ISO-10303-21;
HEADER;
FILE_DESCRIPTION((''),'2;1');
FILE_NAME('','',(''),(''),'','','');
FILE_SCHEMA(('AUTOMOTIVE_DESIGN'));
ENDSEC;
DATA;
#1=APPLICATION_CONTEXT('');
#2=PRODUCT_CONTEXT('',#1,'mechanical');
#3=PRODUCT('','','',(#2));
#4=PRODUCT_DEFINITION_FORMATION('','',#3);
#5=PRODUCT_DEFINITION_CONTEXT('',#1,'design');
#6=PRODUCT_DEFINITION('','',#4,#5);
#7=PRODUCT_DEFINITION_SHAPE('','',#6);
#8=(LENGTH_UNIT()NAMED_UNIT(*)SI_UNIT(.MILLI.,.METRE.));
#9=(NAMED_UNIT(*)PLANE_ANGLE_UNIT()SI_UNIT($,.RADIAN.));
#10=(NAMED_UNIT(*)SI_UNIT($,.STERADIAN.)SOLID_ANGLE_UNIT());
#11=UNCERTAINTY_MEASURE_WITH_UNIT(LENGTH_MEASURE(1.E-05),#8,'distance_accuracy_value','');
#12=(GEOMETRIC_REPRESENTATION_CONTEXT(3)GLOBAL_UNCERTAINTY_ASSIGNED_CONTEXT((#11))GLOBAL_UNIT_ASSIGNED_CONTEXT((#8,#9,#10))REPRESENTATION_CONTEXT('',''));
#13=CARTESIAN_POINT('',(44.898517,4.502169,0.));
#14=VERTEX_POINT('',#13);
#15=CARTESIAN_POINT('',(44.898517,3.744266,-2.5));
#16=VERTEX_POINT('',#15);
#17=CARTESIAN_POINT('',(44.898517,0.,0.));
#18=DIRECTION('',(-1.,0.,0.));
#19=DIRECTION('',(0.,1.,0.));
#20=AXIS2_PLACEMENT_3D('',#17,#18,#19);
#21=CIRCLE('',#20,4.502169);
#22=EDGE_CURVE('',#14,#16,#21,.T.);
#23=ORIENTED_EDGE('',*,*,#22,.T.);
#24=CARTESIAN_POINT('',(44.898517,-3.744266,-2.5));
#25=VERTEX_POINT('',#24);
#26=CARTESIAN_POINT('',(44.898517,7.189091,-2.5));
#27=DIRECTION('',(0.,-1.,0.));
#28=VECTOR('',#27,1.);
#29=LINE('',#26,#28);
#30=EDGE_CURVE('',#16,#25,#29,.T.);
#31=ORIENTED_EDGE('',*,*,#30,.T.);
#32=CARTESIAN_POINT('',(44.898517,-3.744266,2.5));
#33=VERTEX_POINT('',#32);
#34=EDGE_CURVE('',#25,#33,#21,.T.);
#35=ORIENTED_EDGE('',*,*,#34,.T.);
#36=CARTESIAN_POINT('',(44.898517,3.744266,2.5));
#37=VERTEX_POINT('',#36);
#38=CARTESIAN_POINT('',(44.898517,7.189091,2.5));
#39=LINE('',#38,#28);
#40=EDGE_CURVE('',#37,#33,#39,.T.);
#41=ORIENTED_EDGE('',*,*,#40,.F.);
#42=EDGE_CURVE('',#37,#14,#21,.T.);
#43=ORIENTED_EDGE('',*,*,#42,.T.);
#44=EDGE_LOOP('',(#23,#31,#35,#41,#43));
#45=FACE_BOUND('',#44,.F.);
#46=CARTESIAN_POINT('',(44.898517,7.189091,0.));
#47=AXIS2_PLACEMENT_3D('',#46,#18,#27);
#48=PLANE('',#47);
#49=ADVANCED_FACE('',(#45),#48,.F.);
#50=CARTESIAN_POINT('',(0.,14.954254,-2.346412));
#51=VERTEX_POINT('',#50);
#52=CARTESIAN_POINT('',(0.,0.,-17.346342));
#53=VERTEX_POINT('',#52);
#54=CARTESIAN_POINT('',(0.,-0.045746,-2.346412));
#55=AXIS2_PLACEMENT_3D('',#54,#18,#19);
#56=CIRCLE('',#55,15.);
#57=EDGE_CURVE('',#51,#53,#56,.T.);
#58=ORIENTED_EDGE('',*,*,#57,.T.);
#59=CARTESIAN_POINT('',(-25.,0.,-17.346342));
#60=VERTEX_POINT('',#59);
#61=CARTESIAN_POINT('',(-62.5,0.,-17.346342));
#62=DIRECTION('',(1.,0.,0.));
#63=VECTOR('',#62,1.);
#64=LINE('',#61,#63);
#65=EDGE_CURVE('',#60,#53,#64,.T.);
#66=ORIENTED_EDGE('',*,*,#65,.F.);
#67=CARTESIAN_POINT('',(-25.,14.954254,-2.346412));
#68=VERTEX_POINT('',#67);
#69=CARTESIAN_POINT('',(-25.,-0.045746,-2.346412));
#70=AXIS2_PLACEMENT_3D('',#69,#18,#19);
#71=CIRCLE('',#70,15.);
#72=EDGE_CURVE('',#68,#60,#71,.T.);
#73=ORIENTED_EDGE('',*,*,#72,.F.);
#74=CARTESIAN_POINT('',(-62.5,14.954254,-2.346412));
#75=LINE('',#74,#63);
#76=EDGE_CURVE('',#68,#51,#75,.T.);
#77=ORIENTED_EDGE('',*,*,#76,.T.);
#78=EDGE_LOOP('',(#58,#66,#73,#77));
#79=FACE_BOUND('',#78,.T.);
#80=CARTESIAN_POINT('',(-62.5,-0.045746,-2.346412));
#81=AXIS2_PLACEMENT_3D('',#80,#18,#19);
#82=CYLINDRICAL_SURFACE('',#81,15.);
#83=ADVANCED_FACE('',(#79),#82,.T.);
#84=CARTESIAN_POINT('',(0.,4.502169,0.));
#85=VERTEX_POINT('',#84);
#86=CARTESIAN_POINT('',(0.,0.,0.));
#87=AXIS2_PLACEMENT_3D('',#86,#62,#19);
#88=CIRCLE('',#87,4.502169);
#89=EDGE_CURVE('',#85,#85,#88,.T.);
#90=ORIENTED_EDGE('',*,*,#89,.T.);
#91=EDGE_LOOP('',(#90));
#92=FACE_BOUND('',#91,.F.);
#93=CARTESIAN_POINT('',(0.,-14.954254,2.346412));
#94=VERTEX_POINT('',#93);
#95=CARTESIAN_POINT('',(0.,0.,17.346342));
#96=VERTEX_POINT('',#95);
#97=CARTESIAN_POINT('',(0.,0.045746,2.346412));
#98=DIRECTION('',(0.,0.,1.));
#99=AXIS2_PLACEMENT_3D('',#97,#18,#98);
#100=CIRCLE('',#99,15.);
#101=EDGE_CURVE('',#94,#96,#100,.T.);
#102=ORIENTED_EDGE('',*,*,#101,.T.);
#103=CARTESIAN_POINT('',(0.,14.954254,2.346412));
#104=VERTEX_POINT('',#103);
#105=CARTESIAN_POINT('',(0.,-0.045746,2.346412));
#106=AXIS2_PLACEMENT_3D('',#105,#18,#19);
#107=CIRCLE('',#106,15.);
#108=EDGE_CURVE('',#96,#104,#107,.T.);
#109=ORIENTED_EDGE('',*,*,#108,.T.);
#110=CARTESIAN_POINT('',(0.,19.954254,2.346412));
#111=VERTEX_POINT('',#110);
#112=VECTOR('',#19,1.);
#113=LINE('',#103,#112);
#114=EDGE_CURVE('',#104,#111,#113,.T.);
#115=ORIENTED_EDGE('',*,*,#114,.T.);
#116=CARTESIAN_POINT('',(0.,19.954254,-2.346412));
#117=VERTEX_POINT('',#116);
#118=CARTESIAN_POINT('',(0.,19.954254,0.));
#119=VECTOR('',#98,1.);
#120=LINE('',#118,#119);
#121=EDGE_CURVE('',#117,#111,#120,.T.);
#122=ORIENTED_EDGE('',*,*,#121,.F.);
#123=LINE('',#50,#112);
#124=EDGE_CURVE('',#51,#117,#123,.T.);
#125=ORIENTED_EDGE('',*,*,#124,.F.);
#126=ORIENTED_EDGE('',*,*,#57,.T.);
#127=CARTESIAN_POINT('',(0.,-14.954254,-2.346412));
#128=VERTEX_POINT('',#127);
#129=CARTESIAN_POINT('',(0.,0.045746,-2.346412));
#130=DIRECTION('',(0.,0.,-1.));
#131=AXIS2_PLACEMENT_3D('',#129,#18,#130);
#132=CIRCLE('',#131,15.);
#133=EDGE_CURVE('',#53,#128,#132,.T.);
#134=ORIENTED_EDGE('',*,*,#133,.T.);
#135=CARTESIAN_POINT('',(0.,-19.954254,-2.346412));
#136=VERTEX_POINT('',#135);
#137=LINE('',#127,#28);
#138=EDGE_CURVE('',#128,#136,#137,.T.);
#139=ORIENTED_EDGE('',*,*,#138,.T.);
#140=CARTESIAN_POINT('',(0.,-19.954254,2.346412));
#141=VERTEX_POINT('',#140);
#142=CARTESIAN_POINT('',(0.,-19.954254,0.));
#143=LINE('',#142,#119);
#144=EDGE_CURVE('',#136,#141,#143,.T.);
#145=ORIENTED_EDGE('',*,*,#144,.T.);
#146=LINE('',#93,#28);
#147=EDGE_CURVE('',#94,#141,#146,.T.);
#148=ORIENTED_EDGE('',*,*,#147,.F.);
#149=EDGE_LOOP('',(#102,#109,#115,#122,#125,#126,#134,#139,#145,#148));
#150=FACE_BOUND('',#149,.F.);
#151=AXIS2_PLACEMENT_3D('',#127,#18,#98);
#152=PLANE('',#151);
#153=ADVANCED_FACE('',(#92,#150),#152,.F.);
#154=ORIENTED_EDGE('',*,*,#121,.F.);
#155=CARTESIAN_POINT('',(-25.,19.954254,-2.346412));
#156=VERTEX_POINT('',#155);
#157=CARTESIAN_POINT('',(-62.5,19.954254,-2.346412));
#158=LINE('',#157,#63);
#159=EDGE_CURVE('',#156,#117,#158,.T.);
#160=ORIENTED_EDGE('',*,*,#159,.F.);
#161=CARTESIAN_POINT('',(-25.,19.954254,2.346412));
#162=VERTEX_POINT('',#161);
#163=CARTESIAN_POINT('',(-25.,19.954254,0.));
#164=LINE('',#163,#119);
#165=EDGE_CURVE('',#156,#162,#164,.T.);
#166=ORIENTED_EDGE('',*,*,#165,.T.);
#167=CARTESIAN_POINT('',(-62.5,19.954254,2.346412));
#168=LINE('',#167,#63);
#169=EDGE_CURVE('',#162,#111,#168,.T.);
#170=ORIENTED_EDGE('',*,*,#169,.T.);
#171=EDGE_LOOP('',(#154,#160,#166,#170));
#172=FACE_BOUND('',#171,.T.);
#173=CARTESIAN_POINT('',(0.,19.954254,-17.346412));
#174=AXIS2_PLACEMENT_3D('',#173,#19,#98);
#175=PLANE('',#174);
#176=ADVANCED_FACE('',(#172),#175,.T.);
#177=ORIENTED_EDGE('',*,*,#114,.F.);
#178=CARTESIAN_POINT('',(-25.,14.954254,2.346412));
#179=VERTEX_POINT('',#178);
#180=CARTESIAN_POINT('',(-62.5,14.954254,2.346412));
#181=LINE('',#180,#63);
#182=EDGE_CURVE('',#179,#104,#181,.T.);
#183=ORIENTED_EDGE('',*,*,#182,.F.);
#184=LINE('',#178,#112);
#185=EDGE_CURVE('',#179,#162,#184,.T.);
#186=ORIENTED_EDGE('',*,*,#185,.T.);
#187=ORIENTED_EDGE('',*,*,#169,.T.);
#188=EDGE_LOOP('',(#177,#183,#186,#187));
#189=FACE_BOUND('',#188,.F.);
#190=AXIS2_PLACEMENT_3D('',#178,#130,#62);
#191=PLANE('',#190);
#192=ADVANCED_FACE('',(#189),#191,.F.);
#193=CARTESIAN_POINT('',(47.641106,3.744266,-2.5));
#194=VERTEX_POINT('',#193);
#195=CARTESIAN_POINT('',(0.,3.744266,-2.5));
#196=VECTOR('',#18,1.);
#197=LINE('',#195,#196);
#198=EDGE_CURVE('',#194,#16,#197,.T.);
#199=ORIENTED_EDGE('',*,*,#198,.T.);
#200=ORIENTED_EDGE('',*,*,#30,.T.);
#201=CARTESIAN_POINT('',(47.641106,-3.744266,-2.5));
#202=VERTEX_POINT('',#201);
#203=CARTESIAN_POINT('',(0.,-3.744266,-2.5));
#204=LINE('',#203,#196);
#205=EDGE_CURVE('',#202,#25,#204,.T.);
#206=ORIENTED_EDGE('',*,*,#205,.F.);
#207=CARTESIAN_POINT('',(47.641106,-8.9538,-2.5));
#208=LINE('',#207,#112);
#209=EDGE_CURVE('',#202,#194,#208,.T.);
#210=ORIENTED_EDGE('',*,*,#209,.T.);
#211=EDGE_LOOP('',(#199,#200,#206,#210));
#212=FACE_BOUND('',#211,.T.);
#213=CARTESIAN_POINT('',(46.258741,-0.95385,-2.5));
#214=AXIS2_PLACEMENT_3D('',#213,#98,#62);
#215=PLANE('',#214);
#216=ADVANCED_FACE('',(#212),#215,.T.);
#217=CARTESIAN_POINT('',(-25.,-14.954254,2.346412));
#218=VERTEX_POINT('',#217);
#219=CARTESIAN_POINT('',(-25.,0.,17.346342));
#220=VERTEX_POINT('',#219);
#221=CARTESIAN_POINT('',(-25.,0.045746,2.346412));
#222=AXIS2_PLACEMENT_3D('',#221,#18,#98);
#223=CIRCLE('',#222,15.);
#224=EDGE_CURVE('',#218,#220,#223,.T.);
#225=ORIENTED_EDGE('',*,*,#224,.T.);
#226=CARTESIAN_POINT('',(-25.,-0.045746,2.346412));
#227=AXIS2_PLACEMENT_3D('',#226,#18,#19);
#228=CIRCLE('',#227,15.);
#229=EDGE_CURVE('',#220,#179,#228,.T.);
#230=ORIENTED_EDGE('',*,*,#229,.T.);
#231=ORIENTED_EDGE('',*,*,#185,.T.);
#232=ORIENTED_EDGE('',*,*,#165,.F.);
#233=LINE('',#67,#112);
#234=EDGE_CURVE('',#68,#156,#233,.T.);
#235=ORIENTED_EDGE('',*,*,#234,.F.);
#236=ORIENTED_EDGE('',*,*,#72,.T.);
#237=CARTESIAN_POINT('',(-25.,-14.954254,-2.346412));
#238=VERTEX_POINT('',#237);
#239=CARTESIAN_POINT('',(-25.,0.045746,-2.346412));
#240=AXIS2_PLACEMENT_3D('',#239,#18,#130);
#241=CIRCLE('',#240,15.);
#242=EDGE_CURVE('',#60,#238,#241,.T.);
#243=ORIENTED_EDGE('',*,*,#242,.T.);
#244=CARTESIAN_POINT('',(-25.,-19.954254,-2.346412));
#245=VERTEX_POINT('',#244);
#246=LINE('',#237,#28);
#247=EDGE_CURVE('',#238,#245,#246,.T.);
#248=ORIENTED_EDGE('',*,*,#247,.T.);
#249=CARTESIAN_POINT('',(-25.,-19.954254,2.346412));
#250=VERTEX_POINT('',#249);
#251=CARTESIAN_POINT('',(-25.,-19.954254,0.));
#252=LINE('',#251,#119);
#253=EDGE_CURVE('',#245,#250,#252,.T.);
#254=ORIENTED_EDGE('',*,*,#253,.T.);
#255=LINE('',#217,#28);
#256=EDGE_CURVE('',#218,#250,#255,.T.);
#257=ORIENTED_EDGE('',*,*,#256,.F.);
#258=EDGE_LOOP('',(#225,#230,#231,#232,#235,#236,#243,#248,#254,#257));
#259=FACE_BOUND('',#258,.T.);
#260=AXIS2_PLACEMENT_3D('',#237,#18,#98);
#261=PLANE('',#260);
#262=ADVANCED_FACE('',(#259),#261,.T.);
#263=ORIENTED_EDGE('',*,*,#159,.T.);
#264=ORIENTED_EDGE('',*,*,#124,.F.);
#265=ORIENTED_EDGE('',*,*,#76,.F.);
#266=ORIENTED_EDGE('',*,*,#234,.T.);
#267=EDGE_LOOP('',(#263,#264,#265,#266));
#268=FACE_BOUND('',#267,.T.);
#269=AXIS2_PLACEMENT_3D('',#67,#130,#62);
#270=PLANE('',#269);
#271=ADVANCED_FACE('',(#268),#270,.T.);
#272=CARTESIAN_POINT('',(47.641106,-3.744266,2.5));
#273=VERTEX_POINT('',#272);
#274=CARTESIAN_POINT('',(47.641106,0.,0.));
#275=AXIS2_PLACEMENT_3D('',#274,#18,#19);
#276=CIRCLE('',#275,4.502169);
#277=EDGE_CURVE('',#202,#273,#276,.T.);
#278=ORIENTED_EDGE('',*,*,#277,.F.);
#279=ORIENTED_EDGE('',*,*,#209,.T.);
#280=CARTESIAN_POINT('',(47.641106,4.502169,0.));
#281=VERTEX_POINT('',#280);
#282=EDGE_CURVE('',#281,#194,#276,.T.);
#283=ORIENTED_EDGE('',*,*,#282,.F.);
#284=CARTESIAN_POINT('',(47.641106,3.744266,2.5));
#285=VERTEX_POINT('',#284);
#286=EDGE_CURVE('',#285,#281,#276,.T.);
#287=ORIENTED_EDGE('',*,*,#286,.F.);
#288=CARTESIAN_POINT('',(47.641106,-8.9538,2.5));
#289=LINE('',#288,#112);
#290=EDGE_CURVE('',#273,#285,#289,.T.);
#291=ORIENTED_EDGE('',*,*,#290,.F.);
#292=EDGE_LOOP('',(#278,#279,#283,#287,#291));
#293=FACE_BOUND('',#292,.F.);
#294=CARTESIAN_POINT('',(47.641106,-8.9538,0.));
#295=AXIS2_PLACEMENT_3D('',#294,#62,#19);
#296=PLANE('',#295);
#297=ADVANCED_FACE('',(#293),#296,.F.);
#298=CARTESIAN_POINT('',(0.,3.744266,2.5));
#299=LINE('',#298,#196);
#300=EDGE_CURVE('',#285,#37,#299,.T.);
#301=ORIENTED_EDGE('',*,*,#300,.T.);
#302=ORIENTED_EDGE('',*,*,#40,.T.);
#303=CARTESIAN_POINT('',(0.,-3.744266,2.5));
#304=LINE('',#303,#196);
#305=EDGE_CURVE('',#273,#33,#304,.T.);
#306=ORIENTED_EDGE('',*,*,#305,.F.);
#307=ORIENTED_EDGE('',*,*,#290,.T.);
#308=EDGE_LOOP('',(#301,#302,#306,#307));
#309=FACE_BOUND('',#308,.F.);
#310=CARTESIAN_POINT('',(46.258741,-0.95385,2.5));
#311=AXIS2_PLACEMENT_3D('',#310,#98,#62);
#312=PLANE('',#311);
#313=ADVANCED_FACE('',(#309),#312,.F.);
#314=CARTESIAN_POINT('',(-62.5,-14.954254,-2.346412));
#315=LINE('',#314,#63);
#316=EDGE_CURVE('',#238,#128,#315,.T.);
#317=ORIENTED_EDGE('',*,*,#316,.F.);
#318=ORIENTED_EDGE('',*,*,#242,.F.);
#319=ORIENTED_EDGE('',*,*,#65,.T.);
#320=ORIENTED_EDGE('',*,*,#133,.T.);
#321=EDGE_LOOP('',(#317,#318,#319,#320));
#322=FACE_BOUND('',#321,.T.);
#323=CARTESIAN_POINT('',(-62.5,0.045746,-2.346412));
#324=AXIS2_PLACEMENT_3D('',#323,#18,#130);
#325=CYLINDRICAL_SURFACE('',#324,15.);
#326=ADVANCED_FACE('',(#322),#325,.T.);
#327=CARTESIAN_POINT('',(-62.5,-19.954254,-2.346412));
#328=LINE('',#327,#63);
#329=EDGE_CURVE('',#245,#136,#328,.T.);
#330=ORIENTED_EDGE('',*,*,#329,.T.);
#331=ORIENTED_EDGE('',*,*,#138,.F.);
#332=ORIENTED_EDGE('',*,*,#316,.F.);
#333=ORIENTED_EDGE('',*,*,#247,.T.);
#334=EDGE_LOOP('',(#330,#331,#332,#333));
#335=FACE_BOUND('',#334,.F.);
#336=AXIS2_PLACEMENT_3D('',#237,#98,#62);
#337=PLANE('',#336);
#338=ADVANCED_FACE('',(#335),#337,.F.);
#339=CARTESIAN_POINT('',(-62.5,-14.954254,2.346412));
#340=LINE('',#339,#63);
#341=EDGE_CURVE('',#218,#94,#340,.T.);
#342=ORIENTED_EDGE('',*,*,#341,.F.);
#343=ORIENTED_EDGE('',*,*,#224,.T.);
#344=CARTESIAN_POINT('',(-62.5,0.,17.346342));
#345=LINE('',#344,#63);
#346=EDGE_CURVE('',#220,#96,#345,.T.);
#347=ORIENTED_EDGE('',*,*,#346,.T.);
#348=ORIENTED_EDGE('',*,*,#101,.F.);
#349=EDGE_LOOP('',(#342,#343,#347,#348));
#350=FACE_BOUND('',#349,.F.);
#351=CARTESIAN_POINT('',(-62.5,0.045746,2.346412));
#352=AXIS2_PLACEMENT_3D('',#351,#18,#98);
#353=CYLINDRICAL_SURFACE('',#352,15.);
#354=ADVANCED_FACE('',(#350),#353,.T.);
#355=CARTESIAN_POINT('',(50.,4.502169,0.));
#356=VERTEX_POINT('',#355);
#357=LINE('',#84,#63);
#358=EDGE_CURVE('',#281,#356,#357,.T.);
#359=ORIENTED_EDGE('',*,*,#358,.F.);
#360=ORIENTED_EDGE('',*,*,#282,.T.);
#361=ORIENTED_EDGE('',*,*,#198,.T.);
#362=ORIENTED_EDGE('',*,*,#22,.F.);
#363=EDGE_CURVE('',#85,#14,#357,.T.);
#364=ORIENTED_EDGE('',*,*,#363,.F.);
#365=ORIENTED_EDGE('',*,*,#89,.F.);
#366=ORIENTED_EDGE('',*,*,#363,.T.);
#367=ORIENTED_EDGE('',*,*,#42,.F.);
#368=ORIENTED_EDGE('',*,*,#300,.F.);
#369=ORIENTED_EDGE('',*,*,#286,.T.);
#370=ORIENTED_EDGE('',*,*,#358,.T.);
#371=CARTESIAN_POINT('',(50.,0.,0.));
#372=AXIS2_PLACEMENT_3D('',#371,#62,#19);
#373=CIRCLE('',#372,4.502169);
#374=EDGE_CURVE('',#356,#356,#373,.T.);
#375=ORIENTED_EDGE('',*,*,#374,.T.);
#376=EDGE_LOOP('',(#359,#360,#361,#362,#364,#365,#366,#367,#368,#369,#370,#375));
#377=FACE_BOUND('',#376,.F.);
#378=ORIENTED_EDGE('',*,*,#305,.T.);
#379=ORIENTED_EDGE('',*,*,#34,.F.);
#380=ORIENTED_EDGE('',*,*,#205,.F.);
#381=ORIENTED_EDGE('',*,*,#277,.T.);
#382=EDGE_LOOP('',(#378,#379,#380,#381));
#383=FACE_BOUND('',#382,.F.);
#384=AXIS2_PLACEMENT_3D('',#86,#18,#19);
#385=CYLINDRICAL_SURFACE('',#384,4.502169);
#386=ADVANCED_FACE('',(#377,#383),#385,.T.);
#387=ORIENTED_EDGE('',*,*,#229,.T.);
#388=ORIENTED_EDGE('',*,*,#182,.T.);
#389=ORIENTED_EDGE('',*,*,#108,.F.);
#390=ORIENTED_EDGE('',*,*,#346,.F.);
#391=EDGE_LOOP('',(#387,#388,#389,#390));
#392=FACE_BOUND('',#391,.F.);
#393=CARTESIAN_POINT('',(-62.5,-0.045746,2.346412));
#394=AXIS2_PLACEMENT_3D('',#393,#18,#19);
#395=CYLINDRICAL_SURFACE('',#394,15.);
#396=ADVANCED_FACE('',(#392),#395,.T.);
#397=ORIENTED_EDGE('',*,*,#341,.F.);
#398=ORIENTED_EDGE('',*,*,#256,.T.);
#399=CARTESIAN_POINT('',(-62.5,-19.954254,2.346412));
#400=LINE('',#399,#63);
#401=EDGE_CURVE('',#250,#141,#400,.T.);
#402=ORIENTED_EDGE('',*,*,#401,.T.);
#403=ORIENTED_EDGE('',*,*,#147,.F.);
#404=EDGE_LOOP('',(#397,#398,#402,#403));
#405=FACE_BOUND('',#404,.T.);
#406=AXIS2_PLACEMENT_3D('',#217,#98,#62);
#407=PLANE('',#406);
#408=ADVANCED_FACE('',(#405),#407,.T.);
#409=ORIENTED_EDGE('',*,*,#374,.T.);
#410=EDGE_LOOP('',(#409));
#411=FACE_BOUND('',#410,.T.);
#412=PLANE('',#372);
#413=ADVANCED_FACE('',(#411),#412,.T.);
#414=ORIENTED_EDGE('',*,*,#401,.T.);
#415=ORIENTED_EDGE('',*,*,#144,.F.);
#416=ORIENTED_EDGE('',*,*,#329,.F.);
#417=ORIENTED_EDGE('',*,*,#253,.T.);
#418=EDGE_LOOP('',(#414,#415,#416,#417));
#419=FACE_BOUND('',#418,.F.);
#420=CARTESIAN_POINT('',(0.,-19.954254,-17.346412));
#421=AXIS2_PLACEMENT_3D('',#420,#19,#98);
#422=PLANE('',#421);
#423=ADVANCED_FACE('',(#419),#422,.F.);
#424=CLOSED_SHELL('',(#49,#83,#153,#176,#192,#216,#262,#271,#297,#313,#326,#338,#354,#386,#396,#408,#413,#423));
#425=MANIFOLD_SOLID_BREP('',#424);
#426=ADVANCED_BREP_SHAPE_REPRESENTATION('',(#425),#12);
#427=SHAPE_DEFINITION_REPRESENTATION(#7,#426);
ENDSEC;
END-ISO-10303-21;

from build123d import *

# Parameters (mm, degrees)
F0_W        = 29.9085080624
F0_H        = 34.6928238869
F1_DEPTH    = 25
F2_R        = 4.5021693383
F3_DEPTH    = 50
F4_T1_DEPTH = 100
F5_DEPTH    = 5
F6_DEPTH    = 5
F8_DEPTH    = 2.5


# Not quite as in the source:
# - a fillet or chamfer that OpenCascade refuses, or shapes differently, is made with other operations: its cross-section is extruded or revolved along the edge and cut away or added


with BuildPart() as f1:
    # F0 (on Right) → F1 (new body)
    with BuildSketch(Plane.YZ):
        Rectangle(F0_W, F0_H)
    extrude(amount=-F1_DEPTH)

    # F2 (on Right) → F3 (join)
    with BuildSketch(Plane.YZ):
        Circle(F2_R)
    extrude(amount=F3_DEPTH)

    # F4: fillet of radius 15 on 4 edges, made by hand

    # F4_s2 → F4_t1 (cut)
    with BuildSketch(Plane.YZ.offset(-62.5)):
        with BuildLine():
            ThreePointArc((0.0457459688, 17.3464119434), (-10.560855749, 12.9530136612), (-14.9542540312, 2.3464119434))
            Line((-14.9542540312, 2.3464119434), (-14.9542540312, 17.3464119434))
            Line((-14.9542540312, 17.3464119434), (0.0457459688, 17.3464119434))
        make_face()
        with BuildLine():
            ThreePointArc((14.9542540312, -2.3464119434), (10.560855749, -12.9530136612), (-0.0457459688, -17.3464119434))
            Line((-0.0457459688, -17.3464119434), (14.9542540312, -17.3464119434))
            Line((14.9542540312, -17.3464119434), (14.9542540312, -2.3464119434))
        make_face()
        with BuildLine():
            ThreePointArc((14.9542540312, 2.3464119434), (10.560855749, 12.9530136612), (-0.0457459688, 17.3464119434))
            Line((-0.0457459688, 17.3464119434), (14.9542540312, 17.3464119434))
            Line((14.9542540312, 17.3464119434), (14.9542540312, 2.3464119434))
        make_face()
        with BuildLine():
            ThreePointArc((0.0457459688, -17.3464119434), (-10.560855749, -12.9530136612), (-14.9542540312, -2.3464119434))
            Line((-14.9542540312, -2.3464119434), (-14.9542540312, -17.3464119434))
            Line((-14.9542540312, -17.3464119434), (0.0457459688, -17.3464119434))
        make_face()
    extrude(amount=F4_T1_DEPTH, mode=Mode.SUBTRACT)

    # F5 (add): a face of the model
    f5_faces = [f1.faces().sort_by_distance(p)[0] for p in [
        (-12.5, 14.9542540312, 0),
    ]]
    extrude(f5_faces, amount=F5_DEPTH)

    # F6 (add): a face of the model
    f6_faces = [f1.faces().sort_by_distance(p)[0] for p in [
        (-12.5, -14.9542540312, 0),
    ]]
    extrude(f6_faces, amount=F6_DEPTH)

    # F7 (on Top) → F8 (cut, symmetric)
    with BuildSketch(Plane.XY):
        Polygon((44.8985174298, 7.189091295), (44.8985174298, -8.9538004249), (47.6411059499, -8.9538004249), (47.6411059499, 6.886465475), align=None)
    extrude(amount=F8_DEPTH, both=True, mode=Mode.SUBTRACT)


solid = f1.part
